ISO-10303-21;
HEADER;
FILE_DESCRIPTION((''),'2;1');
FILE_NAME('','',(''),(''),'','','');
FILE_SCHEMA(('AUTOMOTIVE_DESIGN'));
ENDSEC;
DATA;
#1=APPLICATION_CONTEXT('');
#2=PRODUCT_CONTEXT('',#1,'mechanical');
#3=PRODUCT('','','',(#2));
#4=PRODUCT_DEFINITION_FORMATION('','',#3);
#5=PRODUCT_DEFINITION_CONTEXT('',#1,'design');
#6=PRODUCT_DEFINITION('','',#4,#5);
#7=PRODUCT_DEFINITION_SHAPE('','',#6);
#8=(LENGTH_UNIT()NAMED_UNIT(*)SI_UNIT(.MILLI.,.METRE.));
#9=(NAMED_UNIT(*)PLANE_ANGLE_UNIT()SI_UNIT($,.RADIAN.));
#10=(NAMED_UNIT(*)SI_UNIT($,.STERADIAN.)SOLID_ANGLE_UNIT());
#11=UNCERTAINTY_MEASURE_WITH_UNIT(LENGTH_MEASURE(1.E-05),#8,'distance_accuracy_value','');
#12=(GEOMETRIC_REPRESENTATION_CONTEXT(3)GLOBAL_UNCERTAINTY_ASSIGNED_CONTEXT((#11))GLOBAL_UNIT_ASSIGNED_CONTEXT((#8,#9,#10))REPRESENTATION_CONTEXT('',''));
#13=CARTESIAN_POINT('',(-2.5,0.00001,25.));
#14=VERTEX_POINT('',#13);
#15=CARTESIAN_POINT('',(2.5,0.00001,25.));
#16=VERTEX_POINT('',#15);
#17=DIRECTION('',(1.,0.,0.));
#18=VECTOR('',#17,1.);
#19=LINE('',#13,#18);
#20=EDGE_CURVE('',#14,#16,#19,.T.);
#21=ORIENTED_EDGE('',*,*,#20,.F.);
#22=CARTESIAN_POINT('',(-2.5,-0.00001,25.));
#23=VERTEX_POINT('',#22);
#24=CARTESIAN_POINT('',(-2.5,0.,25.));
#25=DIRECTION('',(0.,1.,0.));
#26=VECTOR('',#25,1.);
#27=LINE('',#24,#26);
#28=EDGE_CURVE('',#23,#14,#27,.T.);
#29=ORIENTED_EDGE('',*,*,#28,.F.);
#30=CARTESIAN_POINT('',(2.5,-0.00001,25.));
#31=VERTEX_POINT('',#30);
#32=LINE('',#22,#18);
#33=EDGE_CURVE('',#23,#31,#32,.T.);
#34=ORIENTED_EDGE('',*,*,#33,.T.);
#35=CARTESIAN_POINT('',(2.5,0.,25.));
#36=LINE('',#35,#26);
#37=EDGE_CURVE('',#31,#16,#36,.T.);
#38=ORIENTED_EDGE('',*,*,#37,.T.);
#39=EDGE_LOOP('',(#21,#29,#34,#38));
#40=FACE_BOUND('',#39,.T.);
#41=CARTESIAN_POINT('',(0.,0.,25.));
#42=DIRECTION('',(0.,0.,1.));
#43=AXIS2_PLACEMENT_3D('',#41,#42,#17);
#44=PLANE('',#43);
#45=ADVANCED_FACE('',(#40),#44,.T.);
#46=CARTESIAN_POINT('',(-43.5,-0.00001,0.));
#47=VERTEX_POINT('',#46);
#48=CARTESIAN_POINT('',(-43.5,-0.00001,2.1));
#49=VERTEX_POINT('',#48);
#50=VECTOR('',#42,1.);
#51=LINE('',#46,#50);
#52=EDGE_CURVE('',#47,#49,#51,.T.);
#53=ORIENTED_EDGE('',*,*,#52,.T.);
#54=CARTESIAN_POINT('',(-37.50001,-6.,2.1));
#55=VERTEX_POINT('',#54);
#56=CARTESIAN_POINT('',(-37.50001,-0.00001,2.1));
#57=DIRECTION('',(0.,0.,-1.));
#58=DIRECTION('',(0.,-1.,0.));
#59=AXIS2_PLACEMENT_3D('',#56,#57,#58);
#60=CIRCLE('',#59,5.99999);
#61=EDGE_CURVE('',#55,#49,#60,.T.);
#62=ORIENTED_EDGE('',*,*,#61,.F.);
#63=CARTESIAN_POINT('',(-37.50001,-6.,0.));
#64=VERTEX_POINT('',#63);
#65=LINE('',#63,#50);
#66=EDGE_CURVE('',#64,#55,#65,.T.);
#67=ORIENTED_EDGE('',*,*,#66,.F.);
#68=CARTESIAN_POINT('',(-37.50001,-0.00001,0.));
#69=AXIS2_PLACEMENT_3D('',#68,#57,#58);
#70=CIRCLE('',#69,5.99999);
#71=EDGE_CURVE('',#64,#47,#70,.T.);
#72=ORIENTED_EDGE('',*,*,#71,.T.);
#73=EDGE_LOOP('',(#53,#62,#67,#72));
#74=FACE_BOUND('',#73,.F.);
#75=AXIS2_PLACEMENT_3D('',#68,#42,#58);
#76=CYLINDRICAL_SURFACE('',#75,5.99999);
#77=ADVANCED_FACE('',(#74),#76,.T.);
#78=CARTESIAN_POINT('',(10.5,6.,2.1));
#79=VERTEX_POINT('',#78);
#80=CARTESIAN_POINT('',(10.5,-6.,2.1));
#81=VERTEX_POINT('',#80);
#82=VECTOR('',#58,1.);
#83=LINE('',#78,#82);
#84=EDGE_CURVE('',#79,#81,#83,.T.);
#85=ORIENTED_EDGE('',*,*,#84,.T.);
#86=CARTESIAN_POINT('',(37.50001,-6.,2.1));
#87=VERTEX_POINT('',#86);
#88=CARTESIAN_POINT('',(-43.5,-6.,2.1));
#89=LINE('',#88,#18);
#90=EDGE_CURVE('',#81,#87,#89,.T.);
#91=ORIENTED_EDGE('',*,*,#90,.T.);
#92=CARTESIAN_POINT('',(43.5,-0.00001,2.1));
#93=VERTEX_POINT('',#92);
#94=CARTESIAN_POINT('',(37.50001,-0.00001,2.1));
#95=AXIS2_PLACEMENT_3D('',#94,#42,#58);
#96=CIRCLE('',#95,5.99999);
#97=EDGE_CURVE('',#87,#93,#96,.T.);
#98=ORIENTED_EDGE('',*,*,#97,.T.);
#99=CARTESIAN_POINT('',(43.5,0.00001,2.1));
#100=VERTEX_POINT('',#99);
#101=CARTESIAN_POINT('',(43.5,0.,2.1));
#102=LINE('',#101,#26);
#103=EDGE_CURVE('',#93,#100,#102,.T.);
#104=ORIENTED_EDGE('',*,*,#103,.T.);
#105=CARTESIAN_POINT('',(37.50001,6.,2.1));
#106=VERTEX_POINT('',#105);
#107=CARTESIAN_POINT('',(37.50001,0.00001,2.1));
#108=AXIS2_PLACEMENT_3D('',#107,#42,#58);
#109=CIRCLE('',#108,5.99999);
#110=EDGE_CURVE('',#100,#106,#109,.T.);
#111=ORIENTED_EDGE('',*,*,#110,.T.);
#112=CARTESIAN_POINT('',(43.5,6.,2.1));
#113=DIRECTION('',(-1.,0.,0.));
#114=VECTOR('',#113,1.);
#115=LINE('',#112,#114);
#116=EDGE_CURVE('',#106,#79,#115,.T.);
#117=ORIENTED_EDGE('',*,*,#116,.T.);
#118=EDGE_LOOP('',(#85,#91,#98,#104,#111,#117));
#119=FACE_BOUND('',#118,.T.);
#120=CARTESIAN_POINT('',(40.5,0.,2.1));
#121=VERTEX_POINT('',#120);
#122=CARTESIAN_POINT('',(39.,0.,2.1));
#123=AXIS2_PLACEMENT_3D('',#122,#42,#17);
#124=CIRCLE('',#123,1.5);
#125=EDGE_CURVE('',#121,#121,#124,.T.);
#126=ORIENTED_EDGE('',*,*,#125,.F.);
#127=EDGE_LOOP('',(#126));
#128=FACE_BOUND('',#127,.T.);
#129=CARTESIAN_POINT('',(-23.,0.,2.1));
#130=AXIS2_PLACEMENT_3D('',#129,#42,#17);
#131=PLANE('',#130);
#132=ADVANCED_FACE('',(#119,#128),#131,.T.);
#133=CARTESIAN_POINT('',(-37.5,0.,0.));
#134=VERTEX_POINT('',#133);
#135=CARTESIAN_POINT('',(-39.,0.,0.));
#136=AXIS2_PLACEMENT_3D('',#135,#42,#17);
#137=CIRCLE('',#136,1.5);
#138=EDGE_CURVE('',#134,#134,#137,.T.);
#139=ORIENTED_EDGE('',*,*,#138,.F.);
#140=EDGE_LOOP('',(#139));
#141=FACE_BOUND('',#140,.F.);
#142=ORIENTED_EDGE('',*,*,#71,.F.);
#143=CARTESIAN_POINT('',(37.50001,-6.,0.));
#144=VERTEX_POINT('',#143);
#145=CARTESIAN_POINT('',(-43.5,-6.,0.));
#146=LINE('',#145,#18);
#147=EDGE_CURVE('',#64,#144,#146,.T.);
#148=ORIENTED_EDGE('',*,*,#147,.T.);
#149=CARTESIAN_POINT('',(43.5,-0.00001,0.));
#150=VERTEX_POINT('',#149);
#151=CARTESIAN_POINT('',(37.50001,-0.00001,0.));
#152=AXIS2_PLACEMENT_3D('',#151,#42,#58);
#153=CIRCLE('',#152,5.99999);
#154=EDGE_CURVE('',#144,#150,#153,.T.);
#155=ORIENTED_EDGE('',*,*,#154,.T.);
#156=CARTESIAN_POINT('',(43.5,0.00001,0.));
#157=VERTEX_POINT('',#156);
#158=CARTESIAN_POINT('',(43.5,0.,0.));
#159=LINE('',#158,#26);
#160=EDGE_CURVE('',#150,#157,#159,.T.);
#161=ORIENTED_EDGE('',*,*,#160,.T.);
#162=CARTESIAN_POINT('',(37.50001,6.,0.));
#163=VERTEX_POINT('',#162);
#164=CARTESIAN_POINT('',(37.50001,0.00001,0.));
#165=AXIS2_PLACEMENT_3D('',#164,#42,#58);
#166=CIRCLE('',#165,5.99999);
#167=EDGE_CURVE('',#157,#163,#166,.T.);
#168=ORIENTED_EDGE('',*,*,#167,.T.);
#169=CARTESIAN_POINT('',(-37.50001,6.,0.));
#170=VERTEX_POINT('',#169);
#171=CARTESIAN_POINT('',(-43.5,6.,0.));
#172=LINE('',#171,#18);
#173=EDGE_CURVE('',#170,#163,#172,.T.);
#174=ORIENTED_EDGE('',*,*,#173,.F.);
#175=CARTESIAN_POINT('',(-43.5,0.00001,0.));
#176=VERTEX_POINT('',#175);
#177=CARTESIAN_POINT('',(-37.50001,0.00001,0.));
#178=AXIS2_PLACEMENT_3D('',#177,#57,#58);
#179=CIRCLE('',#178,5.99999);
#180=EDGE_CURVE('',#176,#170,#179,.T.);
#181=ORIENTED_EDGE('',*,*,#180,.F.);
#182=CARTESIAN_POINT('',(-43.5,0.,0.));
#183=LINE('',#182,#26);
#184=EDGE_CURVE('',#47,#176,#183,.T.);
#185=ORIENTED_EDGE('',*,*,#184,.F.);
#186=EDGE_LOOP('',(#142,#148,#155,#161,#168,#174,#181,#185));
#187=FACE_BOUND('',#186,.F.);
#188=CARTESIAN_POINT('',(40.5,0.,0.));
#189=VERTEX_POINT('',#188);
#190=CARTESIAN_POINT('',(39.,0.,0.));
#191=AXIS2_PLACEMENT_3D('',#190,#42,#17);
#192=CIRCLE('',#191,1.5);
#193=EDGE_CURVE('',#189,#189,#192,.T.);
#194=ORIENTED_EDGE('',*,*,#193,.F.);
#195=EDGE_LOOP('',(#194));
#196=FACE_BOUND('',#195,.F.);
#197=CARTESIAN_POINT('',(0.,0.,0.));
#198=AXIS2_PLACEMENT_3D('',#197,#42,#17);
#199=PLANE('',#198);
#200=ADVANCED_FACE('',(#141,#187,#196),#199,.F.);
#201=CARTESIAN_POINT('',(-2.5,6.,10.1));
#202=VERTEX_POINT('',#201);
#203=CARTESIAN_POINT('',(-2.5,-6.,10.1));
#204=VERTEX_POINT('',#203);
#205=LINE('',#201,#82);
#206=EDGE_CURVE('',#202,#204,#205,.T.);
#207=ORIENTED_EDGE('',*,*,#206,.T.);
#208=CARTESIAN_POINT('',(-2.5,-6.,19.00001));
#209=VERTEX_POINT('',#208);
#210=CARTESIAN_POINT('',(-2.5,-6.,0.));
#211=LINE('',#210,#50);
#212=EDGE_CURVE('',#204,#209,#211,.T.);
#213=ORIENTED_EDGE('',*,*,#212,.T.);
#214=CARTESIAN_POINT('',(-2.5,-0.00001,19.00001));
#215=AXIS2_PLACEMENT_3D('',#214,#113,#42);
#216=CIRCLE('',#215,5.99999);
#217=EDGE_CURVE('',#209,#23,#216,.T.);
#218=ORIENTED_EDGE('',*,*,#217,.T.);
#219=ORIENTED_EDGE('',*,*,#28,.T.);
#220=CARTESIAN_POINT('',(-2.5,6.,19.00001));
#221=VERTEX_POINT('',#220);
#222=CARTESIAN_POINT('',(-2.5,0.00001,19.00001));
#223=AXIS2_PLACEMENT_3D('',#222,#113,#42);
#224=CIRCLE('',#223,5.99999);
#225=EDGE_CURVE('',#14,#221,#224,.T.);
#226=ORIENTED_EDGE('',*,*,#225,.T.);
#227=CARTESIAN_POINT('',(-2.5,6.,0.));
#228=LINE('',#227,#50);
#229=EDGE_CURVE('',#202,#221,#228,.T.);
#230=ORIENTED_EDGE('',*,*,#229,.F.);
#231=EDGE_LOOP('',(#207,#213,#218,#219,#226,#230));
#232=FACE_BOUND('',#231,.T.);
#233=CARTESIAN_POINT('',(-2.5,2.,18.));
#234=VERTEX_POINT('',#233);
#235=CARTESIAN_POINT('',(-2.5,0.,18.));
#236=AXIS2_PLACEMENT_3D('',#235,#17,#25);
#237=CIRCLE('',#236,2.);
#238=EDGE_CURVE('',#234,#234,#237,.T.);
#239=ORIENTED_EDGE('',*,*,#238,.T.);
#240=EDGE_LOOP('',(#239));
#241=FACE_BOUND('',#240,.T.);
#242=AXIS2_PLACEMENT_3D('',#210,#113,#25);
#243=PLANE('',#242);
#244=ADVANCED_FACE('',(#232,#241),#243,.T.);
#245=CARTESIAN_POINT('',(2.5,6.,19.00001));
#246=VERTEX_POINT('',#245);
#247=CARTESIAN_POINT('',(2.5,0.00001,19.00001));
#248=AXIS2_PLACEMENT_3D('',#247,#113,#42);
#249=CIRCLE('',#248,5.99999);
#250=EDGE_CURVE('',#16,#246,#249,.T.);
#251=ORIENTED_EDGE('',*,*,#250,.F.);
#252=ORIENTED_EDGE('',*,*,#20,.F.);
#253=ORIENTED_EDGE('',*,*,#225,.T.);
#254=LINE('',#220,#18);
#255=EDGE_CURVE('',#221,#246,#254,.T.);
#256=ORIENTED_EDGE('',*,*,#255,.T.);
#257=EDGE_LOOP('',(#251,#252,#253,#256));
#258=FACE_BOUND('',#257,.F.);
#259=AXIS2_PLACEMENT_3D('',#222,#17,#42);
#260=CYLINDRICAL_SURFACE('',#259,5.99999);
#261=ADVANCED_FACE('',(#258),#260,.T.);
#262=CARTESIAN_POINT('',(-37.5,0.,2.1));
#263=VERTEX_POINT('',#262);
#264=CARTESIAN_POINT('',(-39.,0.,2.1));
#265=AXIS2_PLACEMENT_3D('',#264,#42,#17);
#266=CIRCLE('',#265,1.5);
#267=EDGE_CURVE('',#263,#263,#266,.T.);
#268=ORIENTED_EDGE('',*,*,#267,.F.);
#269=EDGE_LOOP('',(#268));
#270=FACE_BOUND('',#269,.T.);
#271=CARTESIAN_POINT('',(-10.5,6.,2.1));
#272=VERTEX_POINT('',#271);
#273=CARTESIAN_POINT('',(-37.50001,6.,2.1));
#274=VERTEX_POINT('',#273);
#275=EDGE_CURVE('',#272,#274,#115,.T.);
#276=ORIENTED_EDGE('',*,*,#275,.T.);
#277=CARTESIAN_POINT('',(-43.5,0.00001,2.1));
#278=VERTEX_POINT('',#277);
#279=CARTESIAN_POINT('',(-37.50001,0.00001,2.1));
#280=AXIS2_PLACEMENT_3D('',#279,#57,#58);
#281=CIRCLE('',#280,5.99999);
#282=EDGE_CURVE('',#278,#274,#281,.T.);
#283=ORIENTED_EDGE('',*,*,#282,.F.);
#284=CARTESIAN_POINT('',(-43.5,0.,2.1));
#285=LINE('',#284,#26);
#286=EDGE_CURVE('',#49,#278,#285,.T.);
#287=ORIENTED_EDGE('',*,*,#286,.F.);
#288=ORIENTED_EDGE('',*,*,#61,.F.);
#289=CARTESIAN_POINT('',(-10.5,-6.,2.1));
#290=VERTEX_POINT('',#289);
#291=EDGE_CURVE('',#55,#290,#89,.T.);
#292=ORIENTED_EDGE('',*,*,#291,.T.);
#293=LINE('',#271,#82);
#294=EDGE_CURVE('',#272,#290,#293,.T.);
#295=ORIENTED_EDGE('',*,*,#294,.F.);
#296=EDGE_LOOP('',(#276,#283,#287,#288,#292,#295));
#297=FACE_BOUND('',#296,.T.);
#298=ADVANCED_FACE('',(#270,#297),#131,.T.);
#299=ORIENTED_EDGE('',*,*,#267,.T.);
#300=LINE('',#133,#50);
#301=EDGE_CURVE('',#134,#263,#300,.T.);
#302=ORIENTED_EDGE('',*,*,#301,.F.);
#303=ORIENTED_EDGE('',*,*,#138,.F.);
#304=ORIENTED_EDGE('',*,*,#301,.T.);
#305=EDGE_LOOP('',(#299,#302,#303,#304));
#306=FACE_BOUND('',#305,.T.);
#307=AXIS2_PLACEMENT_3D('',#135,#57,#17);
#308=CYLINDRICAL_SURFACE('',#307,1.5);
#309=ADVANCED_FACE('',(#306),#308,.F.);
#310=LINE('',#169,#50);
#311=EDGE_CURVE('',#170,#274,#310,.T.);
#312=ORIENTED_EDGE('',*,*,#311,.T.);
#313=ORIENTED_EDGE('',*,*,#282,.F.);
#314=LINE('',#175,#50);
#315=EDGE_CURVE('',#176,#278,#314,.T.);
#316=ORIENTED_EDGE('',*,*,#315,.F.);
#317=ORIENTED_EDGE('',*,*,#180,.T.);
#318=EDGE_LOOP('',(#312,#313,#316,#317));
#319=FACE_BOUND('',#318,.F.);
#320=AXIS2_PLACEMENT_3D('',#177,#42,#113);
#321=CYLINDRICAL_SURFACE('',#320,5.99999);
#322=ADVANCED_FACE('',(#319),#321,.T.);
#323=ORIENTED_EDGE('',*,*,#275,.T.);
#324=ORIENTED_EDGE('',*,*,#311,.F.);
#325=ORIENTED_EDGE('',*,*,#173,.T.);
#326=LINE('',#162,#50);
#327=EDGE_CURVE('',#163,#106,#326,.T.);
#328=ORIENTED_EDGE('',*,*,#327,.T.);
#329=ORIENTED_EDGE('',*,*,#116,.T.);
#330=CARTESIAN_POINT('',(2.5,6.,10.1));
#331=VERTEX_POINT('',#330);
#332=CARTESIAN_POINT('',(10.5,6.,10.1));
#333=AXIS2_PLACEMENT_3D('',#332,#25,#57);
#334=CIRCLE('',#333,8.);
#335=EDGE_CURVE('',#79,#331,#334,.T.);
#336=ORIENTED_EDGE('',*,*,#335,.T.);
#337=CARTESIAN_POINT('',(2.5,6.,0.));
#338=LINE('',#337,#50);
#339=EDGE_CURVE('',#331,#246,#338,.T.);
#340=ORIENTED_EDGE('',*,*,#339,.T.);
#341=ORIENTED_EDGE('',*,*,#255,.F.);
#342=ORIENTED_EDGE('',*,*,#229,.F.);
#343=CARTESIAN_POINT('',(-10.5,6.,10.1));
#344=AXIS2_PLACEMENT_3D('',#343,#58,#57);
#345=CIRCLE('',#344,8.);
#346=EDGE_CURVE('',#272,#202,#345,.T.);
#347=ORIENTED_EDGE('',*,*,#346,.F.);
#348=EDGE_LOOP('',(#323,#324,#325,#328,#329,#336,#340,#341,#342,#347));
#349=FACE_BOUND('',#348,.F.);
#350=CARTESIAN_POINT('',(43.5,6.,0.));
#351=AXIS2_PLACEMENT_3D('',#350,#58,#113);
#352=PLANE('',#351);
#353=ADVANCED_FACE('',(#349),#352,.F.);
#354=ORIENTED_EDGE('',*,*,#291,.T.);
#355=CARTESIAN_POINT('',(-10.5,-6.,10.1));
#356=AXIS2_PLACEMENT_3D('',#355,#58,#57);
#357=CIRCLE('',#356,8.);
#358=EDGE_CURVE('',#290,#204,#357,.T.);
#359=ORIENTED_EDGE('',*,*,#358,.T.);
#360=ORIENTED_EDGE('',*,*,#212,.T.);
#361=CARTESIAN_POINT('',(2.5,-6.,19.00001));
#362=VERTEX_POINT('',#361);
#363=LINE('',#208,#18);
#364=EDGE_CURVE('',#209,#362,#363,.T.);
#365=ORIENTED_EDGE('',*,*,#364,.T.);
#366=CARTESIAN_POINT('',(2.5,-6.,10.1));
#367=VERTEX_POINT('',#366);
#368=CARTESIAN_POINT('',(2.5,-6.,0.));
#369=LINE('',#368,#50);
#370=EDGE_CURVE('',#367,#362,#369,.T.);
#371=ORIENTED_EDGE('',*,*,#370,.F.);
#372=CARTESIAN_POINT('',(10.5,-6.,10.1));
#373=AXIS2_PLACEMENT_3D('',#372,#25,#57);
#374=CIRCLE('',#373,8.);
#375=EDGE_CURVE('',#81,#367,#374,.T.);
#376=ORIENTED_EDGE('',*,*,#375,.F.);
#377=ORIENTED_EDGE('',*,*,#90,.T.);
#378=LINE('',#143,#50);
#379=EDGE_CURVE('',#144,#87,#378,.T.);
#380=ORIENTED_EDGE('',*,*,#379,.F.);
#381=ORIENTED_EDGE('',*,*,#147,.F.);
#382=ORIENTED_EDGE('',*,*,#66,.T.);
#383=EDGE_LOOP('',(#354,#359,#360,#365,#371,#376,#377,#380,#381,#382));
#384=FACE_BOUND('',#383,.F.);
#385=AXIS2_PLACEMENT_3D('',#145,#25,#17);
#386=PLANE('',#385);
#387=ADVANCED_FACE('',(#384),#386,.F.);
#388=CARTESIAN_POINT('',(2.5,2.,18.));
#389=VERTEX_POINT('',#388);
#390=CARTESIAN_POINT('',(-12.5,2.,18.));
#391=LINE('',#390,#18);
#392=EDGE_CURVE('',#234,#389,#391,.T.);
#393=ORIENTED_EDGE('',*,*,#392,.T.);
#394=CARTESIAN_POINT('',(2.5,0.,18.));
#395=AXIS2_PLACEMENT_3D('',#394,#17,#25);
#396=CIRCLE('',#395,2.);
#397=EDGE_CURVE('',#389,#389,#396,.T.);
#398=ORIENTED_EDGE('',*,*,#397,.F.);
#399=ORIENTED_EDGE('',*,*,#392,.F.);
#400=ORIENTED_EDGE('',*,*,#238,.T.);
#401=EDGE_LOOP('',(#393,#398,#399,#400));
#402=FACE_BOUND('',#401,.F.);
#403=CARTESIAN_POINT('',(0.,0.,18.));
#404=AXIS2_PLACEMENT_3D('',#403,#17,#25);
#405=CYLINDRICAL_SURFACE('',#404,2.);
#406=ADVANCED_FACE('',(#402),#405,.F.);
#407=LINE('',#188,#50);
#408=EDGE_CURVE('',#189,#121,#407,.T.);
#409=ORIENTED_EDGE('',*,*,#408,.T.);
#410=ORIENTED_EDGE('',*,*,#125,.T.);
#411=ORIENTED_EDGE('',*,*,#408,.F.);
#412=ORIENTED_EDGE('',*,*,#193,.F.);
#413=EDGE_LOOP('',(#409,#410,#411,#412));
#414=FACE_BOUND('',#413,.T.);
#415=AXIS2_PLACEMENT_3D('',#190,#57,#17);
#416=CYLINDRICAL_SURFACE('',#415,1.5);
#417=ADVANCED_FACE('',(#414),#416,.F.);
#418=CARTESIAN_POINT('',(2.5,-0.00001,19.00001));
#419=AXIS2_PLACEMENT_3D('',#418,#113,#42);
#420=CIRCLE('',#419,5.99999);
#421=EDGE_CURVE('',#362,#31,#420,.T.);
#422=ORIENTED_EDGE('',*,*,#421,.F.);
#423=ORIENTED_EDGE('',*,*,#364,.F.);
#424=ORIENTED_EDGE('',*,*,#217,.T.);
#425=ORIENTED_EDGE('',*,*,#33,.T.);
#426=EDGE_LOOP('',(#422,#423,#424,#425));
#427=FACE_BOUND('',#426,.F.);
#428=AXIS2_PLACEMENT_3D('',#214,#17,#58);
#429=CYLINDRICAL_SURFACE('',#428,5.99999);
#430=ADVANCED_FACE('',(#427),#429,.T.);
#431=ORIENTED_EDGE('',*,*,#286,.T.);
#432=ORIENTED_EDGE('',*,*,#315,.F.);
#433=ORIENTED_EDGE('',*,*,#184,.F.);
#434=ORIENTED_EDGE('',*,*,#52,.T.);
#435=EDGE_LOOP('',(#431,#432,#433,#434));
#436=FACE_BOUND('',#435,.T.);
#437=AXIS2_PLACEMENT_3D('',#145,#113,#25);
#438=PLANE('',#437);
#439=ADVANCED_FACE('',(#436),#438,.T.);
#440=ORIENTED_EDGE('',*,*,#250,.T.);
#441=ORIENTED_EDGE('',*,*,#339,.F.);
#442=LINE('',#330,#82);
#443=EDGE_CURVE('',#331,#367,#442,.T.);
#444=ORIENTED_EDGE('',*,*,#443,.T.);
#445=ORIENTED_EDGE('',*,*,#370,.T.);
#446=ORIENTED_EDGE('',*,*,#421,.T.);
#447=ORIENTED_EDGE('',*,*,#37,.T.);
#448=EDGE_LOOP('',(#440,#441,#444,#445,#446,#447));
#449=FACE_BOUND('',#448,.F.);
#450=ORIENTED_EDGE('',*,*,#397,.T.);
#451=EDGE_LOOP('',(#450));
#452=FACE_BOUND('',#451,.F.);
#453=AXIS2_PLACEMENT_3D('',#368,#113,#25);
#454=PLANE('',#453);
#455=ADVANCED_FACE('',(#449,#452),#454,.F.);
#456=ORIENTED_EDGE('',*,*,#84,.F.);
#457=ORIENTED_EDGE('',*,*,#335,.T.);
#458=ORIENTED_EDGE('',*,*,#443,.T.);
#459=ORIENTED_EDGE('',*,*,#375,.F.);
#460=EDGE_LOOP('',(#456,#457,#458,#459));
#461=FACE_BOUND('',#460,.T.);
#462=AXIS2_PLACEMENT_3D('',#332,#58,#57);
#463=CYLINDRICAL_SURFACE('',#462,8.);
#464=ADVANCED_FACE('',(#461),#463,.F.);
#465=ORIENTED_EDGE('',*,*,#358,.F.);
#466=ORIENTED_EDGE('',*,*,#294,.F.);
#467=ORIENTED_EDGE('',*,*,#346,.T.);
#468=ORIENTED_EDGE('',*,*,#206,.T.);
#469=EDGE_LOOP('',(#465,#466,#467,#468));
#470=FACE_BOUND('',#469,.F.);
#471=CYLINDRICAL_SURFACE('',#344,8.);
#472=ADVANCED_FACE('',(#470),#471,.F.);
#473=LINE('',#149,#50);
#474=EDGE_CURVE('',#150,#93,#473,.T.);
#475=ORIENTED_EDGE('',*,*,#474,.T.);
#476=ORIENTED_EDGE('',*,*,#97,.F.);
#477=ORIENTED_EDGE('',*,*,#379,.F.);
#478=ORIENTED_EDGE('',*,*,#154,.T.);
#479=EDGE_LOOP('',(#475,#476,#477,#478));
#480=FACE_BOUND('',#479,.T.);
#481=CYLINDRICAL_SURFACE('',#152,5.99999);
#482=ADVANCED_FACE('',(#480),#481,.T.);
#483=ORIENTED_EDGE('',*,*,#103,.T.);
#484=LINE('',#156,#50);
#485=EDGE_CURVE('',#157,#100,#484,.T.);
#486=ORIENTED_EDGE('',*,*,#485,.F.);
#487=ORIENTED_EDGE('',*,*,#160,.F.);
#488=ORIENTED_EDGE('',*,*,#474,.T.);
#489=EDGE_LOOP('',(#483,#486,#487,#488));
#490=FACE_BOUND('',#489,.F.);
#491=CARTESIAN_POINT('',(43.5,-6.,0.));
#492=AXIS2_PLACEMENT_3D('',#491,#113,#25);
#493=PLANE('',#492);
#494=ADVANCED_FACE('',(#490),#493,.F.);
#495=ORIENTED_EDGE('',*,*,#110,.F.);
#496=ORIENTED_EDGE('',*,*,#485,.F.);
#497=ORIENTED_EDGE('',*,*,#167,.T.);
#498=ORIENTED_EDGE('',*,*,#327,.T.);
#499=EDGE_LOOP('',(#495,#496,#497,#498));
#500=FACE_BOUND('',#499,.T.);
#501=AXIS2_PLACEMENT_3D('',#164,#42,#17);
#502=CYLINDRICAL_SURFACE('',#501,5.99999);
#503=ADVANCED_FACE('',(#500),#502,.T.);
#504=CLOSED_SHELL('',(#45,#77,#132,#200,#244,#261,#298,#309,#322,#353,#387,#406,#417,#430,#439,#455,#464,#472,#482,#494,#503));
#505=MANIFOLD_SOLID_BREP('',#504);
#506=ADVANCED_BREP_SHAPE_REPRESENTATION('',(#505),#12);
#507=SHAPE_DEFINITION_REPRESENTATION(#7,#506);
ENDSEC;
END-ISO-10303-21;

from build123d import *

# Parameters (mm, degrees)
F0_W     = 41
F0_H     = 12
F0_R     = 1.5
F0_W_2   = 5
F1_DEPTH = 2.1
F2_DEPTH = 25
F3_R     = 2
F4_DEPTH = 12.5
F5_R     = 5.99999
F6_R     = 8


# Not quite as in the source:
# - a fillet or chamfer is up to 0.001 mm smaller than in the source, because OpenCascade refuses the exact size


with BuildPart() as f1:
    # F0 (on Top) → F1 (new body)
    with BuildSketch(Plane.XY):
        with Locations((-23, 0)):
            Rectangle(F0_W, F0_H)
        with Locations((-39, 0)):
            Circle(F0_R, mode=Mode.SUBTRACT)
        Rectangle(F0_W_2, F0_H)
        with Locations((23, 0)):
            Rectangle(F0_W, F0_H)
        with Locations((39, 0)):
            Circle(F0_R, mode=Mode.SUBTRACT)
    extrude(amount=F1_DEPTH)

    # F0 (on Top) → F2 (join)
    with BuildSketch(Plane.XY):
        Rectangle(F0_W_2, F0_H)
    extrude(amount=F2_DEPTH)

    # F3 (on Right) → F4 (cut, symmetric)
    with BuildSketch(Plane.YZ):
        with Locations((0, 18)):
            Circle(F3_R)
    extrude(amount=F4_DEPTH, both=True, mode=Mode.SUBTRACT)

    # F5 (radius 6 in the source; OpenCascade refuses exactly that, so slightly less here)
    f5_edges = [f1.edges().sort_by_distance(p)[0] for p in [
        (0, -6, 25),
        (0, 6, 25),
        (-43.5, -6, 1.05),
        (-43.5, 6, 1.05),
        (43.5, -6, 1.05),
        (43.5, 6, 1.05),
    ]]
    fillet(f5_edges, radius=F5_R)

    # F6
    f6_edges = [f1.edges().sort_by_distance(p)[0] for p in [
        (2.5, 0, 2.1),
        (-2.5, 0, 2.1),
    ]]
    fillet(f6_edges, radius=F6_R)


solid = f1.part
